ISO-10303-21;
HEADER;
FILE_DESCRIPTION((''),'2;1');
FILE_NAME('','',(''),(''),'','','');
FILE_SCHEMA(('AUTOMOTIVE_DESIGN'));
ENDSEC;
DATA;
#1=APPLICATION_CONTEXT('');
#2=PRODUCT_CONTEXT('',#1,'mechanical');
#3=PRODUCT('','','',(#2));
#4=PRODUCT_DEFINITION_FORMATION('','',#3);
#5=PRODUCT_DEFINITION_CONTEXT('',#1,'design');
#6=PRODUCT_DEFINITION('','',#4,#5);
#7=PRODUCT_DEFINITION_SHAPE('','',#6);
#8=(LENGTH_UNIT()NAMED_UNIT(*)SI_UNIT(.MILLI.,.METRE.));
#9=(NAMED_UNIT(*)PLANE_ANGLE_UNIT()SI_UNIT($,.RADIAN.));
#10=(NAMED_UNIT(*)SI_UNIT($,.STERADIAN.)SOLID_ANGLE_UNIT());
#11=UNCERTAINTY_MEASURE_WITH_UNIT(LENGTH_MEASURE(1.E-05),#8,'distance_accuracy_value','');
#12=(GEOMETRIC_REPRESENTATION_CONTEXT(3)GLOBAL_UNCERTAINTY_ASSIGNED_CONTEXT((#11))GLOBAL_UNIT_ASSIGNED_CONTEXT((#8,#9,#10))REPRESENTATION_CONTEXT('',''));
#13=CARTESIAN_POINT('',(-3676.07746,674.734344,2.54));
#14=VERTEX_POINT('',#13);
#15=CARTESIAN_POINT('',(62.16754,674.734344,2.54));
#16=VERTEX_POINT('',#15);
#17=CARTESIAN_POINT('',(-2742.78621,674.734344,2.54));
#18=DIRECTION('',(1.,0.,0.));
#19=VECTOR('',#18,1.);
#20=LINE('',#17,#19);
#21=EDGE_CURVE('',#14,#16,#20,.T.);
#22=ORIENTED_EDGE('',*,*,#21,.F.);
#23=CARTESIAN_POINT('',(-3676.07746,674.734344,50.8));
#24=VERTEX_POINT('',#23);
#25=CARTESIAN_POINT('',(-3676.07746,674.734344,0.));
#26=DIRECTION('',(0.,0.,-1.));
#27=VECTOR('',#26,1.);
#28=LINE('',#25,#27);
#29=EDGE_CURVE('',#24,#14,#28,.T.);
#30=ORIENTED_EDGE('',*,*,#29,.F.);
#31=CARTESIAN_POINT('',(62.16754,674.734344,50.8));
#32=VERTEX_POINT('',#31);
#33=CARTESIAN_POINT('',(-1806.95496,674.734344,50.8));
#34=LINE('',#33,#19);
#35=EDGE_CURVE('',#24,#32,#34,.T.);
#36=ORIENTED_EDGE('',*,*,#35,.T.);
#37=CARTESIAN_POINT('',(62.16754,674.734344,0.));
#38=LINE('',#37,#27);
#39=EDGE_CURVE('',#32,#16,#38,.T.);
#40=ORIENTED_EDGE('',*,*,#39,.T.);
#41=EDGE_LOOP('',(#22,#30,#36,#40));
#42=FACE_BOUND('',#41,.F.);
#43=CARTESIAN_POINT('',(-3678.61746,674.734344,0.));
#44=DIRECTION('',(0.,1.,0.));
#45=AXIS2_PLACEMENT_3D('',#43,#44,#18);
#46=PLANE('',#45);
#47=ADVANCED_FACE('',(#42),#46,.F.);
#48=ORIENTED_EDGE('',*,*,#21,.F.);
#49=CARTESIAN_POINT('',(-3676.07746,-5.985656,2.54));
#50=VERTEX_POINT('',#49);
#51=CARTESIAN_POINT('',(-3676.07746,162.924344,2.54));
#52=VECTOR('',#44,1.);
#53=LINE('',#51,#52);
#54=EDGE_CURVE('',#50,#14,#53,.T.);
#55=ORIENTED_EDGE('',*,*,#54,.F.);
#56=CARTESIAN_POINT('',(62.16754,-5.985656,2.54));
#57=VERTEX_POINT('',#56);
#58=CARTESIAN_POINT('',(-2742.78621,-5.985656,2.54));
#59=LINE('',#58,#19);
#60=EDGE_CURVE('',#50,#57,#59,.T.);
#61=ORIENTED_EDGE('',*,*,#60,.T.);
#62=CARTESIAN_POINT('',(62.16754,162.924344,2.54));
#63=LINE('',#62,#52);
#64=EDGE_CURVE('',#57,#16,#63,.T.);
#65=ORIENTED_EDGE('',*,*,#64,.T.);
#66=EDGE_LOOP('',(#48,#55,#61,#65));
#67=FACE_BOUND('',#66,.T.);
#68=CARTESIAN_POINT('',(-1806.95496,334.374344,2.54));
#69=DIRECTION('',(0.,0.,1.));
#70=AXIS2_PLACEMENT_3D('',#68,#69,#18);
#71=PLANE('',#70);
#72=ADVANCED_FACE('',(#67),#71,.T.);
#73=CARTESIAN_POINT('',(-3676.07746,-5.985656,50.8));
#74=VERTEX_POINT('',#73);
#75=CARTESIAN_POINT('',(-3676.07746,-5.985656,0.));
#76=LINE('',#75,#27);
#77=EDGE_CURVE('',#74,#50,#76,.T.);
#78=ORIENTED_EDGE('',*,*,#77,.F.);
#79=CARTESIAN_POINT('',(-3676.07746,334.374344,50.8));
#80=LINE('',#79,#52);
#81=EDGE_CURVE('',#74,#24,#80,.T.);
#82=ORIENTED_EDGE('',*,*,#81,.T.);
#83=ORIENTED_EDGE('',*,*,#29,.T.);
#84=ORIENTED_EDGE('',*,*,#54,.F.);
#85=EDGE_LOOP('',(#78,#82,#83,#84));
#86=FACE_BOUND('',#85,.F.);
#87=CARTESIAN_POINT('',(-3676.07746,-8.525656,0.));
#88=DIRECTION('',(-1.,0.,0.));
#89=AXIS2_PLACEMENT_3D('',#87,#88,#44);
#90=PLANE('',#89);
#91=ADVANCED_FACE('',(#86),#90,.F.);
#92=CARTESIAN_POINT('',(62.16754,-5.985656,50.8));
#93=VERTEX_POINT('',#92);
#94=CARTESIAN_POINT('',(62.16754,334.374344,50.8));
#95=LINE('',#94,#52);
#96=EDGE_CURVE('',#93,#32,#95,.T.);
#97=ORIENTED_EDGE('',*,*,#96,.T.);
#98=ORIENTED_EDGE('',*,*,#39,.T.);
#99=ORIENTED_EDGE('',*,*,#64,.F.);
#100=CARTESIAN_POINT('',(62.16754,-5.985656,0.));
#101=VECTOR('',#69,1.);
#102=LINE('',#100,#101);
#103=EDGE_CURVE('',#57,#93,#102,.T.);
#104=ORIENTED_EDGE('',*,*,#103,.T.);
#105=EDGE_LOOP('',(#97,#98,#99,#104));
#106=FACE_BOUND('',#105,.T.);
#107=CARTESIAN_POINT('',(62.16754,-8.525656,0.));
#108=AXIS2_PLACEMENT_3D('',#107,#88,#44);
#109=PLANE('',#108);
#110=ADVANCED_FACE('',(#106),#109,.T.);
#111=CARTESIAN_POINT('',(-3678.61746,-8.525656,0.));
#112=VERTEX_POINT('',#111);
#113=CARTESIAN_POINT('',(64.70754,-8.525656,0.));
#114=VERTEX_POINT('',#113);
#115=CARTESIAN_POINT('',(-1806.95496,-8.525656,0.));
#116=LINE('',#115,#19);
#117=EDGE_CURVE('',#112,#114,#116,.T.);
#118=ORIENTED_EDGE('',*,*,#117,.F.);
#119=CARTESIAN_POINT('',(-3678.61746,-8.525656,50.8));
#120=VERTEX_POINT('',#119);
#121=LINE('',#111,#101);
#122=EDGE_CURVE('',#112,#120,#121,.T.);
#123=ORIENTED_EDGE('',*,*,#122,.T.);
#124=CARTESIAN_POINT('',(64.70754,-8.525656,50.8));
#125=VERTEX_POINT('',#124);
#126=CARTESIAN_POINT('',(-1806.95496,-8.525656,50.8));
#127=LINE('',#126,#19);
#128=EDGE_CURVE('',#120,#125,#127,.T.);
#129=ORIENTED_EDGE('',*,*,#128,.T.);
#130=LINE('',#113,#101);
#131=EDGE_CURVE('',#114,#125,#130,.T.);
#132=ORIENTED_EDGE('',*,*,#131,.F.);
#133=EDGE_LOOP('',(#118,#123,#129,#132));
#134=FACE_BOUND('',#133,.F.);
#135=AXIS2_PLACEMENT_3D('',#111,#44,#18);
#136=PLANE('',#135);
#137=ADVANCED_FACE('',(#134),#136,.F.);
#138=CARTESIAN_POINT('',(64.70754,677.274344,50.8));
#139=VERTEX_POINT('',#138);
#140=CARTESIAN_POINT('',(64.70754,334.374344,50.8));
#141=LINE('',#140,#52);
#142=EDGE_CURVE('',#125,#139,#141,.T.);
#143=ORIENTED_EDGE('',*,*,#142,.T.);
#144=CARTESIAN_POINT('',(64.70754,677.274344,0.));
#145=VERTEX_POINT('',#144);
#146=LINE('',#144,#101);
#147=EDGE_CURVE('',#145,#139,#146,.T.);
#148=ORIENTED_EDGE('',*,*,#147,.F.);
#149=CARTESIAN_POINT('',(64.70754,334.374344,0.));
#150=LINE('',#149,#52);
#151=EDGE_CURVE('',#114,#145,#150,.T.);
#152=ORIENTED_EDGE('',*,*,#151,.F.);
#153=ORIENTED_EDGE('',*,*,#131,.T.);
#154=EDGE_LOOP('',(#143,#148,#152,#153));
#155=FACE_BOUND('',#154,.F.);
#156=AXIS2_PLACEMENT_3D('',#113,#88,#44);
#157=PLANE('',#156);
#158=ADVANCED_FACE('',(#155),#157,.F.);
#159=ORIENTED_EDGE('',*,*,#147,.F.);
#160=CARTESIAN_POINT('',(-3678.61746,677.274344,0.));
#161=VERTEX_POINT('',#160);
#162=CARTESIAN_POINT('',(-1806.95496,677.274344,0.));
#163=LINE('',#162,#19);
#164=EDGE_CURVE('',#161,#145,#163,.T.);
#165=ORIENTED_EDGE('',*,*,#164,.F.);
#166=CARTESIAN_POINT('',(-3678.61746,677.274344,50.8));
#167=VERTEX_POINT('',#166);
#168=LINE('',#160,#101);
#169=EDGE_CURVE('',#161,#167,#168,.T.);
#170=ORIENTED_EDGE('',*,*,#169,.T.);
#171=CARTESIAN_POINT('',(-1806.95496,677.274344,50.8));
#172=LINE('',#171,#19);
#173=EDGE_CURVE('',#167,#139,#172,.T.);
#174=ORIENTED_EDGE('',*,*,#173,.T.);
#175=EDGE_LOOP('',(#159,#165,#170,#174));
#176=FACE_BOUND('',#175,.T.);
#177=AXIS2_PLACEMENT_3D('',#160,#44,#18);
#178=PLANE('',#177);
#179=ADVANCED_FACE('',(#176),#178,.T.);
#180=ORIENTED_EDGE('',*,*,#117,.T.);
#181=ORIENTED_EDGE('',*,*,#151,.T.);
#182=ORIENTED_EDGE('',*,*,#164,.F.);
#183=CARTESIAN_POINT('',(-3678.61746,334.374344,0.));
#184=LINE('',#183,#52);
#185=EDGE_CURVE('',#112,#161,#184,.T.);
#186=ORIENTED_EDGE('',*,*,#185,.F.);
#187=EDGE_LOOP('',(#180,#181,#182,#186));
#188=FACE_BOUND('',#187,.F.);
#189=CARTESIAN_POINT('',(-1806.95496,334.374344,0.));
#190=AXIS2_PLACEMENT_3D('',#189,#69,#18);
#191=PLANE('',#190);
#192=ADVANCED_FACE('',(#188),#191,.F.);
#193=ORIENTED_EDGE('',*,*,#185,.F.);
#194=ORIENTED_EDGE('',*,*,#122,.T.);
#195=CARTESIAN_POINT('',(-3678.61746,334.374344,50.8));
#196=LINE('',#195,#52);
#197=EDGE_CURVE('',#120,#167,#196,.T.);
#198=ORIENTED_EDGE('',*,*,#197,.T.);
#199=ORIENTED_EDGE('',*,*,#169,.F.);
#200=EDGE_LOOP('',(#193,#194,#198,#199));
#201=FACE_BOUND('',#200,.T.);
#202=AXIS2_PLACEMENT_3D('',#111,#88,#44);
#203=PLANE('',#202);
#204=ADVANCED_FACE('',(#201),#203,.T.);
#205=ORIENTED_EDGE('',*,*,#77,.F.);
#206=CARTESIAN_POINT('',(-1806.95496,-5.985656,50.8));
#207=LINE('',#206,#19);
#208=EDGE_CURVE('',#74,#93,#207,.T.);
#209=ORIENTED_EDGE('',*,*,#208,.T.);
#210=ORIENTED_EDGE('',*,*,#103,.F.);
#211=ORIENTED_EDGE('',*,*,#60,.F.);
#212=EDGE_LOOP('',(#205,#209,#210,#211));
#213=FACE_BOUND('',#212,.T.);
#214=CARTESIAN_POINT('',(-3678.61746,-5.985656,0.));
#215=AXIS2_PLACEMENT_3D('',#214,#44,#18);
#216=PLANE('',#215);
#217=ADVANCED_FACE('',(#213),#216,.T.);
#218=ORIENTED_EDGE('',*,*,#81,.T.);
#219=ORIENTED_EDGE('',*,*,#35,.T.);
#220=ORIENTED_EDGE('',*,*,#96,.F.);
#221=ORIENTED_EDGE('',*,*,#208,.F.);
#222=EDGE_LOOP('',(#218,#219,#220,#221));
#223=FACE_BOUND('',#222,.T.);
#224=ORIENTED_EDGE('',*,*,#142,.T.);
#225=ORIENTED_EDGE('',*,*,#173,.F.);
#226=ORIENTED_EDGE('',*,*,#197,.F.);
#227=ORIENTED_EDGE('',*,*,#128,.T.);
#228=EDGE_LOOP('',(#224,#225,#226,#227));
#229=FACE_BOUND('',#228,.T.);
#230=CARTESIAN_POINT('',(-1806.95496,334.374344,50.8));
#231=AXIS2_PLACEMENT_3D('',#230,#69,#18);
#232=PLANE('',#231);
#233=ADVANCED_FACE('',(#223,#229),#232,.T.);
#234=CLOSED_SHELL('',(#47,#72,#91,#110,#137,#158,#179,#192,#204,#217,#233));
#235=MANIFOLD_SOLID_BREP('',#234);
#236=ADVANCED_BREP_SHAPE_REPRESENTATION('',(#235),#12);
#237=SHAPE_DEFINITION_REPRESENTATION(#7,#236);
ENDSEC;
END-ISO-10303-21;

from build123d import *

# Parameters (mm, degrees)
F0_W     = 3743.325
F0_H     = 685.8
F0_W_2   = 3740.277
F0_H_2   = 682.752
F1_DEPTH = 50.8
F3_T     = -2.54


# Not quite as in the source:
# - the program builds the solid bodies; features that only make, move or delete a surface that nothing else refers to are left out


with BuildPart() as f1:
    # F0 (on Top) → F1 (new body)
    with BuildSketch(Plane.XY):
        with Locations((-1806.9549600244, 334.3743443951)):
            Rectangle(F0_W, F0_H)
        with Locations((-1806.9549600244, 334.3743443951)):
            Rectangle(F0_W_2, F0_H_2, mode=Mode.SUBTRACT)
        with Locations((-1806.9549600244, 334.3743443951)):
            Rectangle(F0_W_2, F0_H_2)
    extrude(amount=F1_DEPTH)

    # F3
    f3_openings = [f1.faces().sort_by_distance(p)[0] for p in [
        (-1806.95496, 334.374344, 50.8),
    ]]
    offset(amount=F3_T, openings=f3_openings)


solid = f1.part
